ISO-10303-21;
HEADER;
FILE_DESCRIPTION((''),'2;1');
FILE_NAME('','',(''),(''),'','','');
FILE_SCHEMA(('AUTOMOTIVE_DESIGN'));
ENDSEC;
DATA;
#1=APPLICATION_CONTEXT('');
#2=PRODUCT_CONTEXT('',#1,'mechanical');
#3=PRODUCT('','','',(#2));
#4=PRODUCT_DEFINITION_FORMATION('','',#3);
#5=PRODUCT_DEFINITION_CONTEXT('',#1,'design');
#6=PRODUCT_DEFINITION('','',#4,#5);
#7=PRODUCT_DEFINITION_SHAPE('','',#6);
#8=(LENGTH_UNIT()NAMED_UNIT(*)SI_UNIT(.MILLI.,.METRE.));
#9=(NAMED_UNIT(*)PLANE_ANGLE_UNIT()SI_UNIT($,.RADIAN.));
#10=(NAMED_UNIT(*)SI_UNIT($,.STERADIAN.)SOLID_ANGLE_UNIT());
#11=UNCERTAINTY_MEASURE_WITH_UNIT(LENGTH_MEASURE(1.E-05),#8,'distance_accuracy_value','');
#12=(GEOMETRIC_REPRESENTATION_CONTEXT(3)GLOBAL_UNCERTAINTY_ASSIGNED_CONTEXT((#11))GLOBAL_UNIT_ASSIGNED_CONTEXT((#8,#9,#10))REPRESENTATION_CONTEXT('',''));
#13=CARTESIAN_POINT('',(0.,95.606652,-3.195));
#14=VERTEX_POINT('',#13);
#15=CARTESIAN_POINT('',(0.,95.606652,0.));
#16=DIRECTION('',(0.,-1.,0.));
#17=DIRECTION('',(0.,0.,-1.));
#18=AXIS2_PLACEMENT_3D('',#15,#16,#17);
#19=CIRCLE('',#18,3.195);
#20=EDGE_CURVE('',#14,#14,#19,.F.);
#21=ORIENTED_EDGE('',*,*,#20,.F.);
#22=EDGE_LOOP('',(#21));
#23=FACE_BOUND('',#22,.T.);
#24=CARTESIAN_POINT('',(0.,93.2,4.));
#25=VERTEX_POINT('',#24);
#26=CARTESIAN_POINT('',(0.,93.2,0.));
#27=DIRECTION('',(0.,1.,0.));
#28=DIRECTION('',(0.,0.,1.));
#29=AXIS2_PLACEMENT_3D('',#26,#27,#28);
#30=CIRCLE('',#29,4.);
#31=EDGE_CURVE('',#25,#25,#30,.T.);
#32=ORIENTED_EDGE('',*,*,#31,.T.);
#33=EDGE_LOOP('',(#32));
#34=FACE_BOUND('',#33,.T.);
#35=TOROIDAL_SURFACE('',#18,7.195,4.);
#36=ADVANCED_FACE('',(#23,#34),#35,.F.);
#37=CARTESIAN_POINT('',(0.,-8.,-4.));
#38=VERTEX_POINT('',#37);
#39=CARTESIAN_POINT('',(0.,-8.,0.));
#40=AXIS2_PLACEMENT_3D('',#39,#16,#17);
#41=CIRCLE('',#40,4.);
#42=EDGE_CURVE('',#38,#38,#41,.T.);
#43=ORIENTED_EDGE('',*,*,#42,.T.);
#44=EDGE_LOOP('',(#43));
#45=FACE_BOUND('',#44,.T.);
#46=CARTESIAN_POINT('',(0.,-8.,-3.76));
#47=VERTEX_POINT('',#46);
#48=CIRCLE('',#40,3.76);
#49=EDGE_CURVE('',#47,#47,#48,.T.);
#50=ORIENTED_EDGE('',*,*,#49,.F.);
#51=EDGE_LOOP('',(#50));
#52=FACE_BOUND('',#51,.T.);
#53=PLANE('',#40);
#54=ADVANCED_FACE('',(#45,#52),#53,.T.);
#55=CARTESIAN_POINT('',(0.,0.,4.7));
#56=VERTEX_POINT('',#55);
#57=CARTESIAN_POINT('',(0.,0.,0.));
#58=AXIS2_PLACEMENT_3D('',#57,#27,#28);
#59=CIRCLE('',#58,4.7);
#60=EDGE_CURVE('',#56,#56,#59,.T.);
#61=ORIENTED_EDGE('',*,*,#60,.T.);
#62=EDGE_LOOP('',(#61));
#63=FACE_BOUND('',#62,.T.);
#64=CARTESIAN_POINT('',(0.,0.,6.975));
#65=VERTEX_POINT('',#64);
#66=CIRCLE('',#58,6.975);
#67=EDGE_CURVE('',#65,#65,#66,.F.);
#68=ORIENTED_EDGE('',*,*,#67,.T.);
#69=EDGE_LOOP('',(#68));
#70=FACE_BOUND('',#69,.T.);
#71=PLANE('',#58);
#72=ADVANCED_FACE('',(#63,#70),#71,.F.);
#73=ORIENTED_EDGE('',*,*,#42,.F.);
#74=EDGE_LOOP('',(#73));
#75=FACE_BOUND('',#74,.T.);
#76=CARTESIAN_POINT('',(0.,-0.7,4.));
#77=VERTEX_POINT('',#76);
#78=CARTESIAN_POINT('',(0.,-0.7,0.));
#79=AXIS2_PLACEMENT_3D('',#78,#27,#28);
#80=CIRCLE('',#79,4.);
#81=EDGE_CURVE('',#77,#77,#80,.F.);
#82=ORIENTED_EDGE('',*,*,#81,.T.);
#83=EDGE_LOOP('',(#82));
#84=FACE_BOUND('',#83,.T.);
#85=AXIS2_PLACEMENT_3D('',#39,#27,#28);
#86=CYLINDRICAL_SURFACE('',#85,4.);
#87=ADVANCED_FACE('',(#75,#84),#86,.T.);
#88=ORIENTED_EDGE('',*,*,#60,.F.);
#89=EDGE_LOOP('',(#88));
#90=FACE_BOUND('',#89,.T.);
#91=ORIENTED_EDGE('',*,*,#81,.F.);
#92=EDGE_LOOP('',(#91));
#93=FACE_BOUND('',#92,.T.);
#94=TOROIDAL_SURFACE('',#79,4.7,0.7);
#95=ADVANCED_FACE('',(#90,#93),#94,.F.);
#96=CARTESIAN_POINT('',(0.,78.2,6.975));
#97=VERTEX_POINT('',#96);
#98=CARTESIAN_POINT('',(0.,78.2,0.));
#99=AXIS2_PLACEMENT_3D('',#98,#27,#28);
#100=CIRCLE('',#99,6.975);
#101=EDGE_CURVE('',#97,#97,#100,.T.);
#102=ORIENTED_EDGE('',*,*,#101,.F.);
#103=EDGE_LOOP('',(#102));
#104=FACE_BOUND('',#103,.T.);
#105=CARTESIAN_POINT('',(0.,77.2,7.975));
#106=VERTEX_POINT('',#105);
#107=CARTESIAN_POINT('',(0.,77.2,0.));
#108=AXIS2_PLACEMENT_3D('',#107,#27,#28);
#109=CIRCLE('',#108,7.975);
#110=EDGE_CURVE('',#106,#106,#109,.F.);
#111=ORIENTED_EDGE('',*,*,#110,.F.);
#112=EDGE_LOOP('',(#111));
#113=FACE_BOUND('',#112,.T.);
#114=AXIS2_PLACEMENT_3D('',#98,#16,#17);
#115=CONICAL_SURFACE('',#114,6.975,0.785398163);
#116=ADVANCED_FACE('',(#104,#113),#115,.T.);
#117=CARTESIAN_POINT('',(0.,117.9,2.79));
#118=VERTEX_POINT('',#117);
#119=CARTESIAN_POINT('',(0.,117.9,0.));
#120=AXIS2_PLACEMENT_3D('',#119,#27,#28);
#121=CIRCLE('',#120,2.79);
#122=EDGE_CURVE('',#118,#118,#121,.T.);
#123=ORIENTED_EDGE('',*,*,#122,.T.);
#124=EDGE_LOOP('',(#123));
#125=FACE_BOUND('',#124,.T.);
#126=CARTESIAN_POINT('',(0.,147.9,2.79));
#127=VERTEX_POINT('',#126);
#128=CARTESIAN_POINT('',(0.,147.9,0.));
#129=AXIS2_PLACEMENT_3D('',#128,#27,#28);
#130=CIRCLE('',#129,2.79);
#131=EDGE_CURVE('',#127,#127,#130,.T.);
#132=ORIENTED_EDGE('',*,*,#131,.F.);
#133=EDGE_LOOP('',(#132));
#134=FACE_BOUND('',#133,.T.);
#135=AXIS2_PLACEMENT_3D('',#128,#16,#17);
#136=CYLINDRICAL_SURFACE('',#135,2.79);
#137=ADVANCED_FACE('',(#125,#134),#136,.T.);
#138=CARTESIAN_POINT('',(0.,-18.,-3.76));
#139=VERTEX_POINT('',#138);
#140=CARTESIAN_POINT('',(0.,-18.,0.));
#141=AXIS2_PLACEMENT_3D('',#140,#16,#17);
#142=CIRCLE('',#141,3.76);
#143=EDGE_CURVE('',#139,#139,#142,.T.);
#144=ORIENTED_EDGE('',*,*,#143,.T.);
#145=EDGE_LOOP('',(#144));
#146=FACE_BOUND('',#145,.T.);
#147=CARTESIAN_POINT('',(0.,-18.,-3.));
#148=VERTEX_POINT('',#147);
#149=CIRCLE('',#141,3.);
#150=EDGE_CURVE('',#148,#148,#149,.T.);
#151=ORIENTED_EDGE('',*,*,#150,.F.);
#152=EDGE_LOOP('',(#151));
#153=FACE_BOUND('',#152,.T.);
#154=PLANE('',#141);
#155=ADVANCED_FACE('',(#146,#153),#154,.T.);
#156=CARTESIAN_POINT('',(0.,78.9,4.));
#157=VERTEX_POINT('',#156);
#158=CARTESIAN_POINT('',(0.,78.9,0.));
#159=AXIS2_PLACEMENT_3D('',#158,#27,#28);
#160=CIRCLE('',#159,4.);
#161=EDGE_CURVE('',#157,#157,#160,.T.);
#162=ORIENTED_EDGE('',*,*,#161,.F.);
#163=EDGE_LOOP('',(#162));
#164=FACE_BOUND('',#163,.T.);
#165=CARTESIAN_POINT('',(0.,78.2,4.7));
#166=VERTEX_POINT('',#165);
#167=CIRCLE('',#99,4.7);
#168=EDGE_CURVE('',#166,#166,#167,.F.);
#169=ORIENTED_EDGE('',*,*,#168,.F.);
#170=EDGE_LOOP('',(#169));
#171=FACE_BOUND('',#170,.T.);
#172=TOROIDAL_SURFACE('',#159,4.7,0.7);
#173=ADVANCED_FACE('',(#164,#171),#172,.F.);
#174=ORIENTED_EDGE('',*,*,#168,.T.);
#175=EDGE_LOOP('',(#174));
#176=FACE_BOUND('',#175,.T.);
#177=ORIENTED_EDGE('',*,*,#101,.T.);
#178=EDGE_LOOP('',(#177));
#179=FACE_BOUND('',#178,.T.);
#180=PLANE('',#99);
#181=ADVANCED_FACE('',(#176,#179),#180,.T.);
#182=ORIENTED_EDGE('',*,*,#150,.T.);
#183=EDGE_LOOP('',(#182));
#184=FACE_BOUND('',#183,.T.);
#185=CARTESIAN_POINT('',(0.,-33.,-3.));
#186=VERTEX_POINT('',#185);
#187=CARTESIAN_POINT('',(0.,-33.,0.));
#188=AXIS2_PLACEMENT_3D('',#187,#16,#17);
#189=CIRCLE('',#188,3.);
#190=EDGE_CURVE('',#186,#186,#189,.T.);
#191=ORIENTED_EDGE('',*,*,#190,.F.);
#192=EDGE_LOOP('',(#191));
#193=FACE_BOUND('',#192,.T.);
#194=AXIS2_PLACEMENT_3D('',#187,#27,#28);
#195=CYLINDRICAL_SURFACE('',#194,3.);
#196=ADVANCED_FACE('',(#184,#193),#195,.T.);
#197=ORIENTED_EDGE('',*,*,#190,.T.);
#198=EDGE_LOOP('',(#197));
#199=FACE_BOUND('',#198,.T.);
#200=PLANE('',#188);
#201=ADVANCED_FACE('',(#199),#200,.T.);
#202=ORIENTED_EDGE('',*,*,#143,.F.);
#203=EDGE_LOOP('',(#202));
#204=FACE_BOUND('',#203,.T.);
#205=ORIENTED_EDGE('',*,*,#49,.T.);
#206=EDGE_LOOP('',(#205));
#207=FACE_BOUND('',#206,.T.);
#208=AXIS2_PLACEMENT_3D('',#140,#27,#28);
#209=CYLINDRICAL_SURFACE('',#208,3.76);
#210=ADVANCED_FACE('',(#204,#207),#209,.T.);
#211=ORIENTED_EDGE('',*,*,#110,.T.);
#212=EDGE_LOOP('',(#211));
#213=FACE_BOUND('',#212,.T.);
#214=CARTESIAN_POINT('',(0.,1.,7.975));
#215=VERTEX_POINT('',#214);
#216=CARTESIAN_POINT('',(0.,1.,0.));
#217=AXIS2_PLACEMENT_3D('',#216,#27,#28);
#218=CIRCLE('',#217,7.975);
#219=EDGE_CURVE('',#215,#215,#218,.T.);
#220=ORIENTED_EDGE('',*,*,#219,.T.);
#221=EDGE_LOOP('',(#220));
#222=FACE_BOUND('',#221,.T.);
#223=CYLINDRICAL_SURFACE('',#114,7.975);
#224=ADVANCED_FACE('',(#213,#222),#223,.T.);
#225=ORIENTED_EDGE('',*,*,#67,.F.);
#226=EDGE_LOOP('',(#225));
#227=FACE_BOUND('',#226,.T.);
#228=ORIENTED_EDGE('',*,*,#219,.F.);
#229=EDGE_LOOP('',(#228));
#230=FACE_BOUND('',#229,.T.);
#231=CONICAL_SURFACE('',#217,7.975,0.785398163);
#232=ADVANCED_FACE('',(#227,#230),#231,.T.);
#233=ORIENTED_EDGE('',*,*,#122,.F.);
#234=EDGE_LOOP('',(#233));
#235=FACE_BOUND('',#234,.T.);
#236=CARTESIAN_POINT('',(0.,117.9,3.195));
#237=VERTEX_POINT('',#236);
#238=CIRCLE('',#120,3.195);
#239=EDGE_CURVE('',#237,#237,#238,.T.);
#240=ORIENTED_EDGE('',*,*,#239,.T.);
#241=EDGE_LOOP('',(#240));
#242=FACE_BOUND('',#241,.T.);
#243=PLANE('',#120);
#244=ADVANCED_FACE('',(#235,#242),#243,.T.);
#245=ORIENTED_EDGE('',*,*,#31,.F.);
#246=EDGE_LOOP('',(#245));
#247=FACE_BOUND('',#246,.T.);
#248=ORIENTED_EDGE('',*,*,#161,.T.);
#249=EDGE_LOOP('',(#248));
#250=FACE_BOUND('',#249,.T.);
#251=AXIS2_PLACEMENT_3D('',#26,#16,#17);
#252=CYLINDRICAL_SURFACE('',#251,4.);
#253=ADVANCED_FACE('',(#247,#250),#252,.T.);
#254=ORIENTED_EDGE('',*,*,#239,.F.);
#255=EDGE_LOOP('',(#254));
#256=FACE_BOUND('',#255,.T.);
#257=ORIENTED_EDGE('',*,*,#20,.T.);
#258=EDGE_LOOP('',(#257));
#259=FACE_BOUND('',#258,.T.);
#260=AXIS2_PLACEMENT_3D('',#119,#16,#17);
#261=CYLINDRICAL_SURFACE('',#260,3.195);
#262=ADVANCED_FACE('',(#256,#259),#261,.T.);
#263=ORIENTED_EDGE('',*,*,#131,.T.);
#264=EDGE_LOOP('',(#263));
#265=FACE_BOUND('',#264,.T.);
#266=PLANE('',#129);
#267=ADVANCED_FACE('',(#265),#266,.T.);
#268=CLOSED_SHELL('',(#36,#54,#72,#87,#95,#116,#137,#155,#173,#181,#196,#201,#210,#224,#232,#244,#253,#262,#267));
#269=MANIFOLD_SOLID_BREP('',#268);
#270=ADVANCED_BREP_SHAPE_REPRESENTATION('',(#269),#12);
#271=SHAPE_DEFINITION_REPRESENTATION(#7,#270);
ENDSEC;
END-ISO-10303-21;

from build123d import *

# Parameters (mm, degrees)
SKETCH1_R           = 7.975
BOSS_EXTRUDE1_DEPTH = 78.2
SKETCH2_R           = 4
BOSS_EXTRUDE2_DEPTH = 15
BOSS_EXTRUDE3_START = 8
SKETCH3_R           = 4
BOSS_EXTRUDE3_DEPTH = 8
SKETCH4_R           = 3.195
BOSS_EXTRUDE4_DEPTH = 24.7
SKETCH5_R           = 2.79
BOSS_EXTRUDE5_DEPTH = 30
BOSS_EXTRUDE7_START = 8
SKETCH3_2_R         = 4
BOSS_EXTRUDE7_DEPTH = 8
SKETCH11_R          = 3.76
BOSS_EXTRUDE8_DEPTH = 10
SKETCH12_R          = 3
BOSS_EXTRUDE9_DEPTH = 15
CHAMFER6_SIZE       = 1
CHAMFER7_SIZE       = 1
FILLET1_R           = 0.7
FILLET3_R           = 0.7
FILLET4_R           = 4


with BuildPart() as part:
    # Sketch1 → Boss-Extrude1 (new body)
    with BuildSketch(Plane(origin=(0, 0, 0), x_dir=(1, 0, 0), z_dir=(0, 1, 0))):
        with Locations(Location((0, 0, 0), (0, 0, 270))):
            Circle(SKETCH1_R)
    extrude(amount=BOSS_EXTRUDE1_DEPTH)

    # Sketch2 → Boss-Extrude2 (add)
    with BuildSketch(Plane(origin=(0, 78.2, 0), x_dir=(1, 0, 0), z_dir=(0, 1, 0))):
        with Locations(Location((0, 0, 0), (0, 0, 270))):
            Circle(SKETCH2_R)
    extrude(amount=BOSS_EXTRUDE2_DEPTH)

    # Sketch3 → Boss-Extrude3 (add)
    with BuildSketch(Plane.XZ.offset(BOSS_EXTRUDE3_START)):
        with Locations(Location((0, 0, 0), (0, 0, 90))):
            Circle(SKETCH3_R)
    extrude(amount=-BOSS_EXTRUDE3_DEPTH)

    # Sketch4 → Boss-Extrude4 (add)
    with BuildSketch(Plane(origin=(0, 93.2, 0), x_dir=(1, 0, 0), z_dir=(0, 1, 0))):
        with Locations(Location((0, 0, 0), (0, 0, 270))):
            Circle(SKETCH4_R)
    extrude(amount=BOSS_EXTRUDE4_DEPTH)

    # Sketch5 → Boss-Extrude5 (add)
    with BuildSketch(Plane(origin=(0, 117.9, 0), x_dir=(1, 0, 0), z_dir=(0, 1, 0))):
        with Locations(Location((0, 0, 0), (0, 0, 270))):
            Circle(SKETCH5_R)
    extrude(amount=BOSS_EXTRUDE5_DEPTH)

    # Sketch3<2> → Boss-Extrude7 (add)
    with BuildSketch(Plane.XZ.offset(BOSS_EXTRUDE7_START)):
        with Locations(Location((0, 0, 0), (0, 0, 90))):
            Circle(SKETCH3_2_R)
    extrude(amount=-BOSS_EXTRUDE7_DEPTH)

    # Sketch11 → Boss-Extrude8 (add)
    with BuildSketch(Plane.XZ.offset(8)):
        with Locations(Location((0, 0, 0), (0, 0, 270))):
            Circle(SKETCH11_R)
    extrude(amount=BOSS_EXTRUDE8_DEPTH)

    # Sketch12 → Boss-Extrude9 (add)
    with BuildSketch(Plane.XZ.offset(18)):
        with Locations(Location((0, 0, 0), (0, 0, 270))):
            Circle(SKETCH12_R)
    extrude(amount=BOSS_EXTRUDE9_DEPTH)

    # Chamfer6
    chamfer6_edges = [part.edges().sort_by_distance(p)[0] for p in [
        (0, 78.2, -7.975),
    ]]
    chamfer(chamfer6_edges, length=CHAMFER6_SIZE)

    # Chamfer7
    chamfer7_edges = [part.edges().sort_by_distance(p)[0] for p in [
        (0, 0, -7.975),
    ]]
    chamfer(chamfer7_edges, length=CHAMFER7_SIZE)

    # Fillet1
    fillet1_edges = [part.edges().sort_by_distance(p)[0] for p in [
        (0, 78.2, -4),
    ]]
    fillet(fillet1_edges, radius=FILLET1_R)

    # Fillet3
    fillet3_edges = [part.edges().sort_by_distance(p)[0] for p in [
        (0, 0, -4),
    ]]
    fillet(fillet3_edges, radius=FILLET3_R)

    # Fillet4
    # the kernel refuses this fillet: 4 mm, written as the material it adds along each edge
    with BuildSketch(Plane(origin=(0, 93.2, 0), x_dir=(0, 0, 1), z_dir=(-1, 0, 0))) as fillet4_piece_1:
        with BuildLine():
            CenterArc((7.195, 2.406652239), FILLET4_R, 180, 36.989098612)
            Line((3.195, 2.406652239), (3.115, 2.406652239))
            Line((3.115, 2.406652239), (3.115, 0))
            Line((3.115, 0), (3.195, -0.08))
            ThreePointArc((3.195, -0.08), (3.5975, -0.08), (3.9361, -0.048133045))
            Line((3.9361, -0.048133045), (4, 0))
        make_face()
    revolve(axis=Axis((0, 93.2, 0), (0, 1, 0)))


solid = part.part
